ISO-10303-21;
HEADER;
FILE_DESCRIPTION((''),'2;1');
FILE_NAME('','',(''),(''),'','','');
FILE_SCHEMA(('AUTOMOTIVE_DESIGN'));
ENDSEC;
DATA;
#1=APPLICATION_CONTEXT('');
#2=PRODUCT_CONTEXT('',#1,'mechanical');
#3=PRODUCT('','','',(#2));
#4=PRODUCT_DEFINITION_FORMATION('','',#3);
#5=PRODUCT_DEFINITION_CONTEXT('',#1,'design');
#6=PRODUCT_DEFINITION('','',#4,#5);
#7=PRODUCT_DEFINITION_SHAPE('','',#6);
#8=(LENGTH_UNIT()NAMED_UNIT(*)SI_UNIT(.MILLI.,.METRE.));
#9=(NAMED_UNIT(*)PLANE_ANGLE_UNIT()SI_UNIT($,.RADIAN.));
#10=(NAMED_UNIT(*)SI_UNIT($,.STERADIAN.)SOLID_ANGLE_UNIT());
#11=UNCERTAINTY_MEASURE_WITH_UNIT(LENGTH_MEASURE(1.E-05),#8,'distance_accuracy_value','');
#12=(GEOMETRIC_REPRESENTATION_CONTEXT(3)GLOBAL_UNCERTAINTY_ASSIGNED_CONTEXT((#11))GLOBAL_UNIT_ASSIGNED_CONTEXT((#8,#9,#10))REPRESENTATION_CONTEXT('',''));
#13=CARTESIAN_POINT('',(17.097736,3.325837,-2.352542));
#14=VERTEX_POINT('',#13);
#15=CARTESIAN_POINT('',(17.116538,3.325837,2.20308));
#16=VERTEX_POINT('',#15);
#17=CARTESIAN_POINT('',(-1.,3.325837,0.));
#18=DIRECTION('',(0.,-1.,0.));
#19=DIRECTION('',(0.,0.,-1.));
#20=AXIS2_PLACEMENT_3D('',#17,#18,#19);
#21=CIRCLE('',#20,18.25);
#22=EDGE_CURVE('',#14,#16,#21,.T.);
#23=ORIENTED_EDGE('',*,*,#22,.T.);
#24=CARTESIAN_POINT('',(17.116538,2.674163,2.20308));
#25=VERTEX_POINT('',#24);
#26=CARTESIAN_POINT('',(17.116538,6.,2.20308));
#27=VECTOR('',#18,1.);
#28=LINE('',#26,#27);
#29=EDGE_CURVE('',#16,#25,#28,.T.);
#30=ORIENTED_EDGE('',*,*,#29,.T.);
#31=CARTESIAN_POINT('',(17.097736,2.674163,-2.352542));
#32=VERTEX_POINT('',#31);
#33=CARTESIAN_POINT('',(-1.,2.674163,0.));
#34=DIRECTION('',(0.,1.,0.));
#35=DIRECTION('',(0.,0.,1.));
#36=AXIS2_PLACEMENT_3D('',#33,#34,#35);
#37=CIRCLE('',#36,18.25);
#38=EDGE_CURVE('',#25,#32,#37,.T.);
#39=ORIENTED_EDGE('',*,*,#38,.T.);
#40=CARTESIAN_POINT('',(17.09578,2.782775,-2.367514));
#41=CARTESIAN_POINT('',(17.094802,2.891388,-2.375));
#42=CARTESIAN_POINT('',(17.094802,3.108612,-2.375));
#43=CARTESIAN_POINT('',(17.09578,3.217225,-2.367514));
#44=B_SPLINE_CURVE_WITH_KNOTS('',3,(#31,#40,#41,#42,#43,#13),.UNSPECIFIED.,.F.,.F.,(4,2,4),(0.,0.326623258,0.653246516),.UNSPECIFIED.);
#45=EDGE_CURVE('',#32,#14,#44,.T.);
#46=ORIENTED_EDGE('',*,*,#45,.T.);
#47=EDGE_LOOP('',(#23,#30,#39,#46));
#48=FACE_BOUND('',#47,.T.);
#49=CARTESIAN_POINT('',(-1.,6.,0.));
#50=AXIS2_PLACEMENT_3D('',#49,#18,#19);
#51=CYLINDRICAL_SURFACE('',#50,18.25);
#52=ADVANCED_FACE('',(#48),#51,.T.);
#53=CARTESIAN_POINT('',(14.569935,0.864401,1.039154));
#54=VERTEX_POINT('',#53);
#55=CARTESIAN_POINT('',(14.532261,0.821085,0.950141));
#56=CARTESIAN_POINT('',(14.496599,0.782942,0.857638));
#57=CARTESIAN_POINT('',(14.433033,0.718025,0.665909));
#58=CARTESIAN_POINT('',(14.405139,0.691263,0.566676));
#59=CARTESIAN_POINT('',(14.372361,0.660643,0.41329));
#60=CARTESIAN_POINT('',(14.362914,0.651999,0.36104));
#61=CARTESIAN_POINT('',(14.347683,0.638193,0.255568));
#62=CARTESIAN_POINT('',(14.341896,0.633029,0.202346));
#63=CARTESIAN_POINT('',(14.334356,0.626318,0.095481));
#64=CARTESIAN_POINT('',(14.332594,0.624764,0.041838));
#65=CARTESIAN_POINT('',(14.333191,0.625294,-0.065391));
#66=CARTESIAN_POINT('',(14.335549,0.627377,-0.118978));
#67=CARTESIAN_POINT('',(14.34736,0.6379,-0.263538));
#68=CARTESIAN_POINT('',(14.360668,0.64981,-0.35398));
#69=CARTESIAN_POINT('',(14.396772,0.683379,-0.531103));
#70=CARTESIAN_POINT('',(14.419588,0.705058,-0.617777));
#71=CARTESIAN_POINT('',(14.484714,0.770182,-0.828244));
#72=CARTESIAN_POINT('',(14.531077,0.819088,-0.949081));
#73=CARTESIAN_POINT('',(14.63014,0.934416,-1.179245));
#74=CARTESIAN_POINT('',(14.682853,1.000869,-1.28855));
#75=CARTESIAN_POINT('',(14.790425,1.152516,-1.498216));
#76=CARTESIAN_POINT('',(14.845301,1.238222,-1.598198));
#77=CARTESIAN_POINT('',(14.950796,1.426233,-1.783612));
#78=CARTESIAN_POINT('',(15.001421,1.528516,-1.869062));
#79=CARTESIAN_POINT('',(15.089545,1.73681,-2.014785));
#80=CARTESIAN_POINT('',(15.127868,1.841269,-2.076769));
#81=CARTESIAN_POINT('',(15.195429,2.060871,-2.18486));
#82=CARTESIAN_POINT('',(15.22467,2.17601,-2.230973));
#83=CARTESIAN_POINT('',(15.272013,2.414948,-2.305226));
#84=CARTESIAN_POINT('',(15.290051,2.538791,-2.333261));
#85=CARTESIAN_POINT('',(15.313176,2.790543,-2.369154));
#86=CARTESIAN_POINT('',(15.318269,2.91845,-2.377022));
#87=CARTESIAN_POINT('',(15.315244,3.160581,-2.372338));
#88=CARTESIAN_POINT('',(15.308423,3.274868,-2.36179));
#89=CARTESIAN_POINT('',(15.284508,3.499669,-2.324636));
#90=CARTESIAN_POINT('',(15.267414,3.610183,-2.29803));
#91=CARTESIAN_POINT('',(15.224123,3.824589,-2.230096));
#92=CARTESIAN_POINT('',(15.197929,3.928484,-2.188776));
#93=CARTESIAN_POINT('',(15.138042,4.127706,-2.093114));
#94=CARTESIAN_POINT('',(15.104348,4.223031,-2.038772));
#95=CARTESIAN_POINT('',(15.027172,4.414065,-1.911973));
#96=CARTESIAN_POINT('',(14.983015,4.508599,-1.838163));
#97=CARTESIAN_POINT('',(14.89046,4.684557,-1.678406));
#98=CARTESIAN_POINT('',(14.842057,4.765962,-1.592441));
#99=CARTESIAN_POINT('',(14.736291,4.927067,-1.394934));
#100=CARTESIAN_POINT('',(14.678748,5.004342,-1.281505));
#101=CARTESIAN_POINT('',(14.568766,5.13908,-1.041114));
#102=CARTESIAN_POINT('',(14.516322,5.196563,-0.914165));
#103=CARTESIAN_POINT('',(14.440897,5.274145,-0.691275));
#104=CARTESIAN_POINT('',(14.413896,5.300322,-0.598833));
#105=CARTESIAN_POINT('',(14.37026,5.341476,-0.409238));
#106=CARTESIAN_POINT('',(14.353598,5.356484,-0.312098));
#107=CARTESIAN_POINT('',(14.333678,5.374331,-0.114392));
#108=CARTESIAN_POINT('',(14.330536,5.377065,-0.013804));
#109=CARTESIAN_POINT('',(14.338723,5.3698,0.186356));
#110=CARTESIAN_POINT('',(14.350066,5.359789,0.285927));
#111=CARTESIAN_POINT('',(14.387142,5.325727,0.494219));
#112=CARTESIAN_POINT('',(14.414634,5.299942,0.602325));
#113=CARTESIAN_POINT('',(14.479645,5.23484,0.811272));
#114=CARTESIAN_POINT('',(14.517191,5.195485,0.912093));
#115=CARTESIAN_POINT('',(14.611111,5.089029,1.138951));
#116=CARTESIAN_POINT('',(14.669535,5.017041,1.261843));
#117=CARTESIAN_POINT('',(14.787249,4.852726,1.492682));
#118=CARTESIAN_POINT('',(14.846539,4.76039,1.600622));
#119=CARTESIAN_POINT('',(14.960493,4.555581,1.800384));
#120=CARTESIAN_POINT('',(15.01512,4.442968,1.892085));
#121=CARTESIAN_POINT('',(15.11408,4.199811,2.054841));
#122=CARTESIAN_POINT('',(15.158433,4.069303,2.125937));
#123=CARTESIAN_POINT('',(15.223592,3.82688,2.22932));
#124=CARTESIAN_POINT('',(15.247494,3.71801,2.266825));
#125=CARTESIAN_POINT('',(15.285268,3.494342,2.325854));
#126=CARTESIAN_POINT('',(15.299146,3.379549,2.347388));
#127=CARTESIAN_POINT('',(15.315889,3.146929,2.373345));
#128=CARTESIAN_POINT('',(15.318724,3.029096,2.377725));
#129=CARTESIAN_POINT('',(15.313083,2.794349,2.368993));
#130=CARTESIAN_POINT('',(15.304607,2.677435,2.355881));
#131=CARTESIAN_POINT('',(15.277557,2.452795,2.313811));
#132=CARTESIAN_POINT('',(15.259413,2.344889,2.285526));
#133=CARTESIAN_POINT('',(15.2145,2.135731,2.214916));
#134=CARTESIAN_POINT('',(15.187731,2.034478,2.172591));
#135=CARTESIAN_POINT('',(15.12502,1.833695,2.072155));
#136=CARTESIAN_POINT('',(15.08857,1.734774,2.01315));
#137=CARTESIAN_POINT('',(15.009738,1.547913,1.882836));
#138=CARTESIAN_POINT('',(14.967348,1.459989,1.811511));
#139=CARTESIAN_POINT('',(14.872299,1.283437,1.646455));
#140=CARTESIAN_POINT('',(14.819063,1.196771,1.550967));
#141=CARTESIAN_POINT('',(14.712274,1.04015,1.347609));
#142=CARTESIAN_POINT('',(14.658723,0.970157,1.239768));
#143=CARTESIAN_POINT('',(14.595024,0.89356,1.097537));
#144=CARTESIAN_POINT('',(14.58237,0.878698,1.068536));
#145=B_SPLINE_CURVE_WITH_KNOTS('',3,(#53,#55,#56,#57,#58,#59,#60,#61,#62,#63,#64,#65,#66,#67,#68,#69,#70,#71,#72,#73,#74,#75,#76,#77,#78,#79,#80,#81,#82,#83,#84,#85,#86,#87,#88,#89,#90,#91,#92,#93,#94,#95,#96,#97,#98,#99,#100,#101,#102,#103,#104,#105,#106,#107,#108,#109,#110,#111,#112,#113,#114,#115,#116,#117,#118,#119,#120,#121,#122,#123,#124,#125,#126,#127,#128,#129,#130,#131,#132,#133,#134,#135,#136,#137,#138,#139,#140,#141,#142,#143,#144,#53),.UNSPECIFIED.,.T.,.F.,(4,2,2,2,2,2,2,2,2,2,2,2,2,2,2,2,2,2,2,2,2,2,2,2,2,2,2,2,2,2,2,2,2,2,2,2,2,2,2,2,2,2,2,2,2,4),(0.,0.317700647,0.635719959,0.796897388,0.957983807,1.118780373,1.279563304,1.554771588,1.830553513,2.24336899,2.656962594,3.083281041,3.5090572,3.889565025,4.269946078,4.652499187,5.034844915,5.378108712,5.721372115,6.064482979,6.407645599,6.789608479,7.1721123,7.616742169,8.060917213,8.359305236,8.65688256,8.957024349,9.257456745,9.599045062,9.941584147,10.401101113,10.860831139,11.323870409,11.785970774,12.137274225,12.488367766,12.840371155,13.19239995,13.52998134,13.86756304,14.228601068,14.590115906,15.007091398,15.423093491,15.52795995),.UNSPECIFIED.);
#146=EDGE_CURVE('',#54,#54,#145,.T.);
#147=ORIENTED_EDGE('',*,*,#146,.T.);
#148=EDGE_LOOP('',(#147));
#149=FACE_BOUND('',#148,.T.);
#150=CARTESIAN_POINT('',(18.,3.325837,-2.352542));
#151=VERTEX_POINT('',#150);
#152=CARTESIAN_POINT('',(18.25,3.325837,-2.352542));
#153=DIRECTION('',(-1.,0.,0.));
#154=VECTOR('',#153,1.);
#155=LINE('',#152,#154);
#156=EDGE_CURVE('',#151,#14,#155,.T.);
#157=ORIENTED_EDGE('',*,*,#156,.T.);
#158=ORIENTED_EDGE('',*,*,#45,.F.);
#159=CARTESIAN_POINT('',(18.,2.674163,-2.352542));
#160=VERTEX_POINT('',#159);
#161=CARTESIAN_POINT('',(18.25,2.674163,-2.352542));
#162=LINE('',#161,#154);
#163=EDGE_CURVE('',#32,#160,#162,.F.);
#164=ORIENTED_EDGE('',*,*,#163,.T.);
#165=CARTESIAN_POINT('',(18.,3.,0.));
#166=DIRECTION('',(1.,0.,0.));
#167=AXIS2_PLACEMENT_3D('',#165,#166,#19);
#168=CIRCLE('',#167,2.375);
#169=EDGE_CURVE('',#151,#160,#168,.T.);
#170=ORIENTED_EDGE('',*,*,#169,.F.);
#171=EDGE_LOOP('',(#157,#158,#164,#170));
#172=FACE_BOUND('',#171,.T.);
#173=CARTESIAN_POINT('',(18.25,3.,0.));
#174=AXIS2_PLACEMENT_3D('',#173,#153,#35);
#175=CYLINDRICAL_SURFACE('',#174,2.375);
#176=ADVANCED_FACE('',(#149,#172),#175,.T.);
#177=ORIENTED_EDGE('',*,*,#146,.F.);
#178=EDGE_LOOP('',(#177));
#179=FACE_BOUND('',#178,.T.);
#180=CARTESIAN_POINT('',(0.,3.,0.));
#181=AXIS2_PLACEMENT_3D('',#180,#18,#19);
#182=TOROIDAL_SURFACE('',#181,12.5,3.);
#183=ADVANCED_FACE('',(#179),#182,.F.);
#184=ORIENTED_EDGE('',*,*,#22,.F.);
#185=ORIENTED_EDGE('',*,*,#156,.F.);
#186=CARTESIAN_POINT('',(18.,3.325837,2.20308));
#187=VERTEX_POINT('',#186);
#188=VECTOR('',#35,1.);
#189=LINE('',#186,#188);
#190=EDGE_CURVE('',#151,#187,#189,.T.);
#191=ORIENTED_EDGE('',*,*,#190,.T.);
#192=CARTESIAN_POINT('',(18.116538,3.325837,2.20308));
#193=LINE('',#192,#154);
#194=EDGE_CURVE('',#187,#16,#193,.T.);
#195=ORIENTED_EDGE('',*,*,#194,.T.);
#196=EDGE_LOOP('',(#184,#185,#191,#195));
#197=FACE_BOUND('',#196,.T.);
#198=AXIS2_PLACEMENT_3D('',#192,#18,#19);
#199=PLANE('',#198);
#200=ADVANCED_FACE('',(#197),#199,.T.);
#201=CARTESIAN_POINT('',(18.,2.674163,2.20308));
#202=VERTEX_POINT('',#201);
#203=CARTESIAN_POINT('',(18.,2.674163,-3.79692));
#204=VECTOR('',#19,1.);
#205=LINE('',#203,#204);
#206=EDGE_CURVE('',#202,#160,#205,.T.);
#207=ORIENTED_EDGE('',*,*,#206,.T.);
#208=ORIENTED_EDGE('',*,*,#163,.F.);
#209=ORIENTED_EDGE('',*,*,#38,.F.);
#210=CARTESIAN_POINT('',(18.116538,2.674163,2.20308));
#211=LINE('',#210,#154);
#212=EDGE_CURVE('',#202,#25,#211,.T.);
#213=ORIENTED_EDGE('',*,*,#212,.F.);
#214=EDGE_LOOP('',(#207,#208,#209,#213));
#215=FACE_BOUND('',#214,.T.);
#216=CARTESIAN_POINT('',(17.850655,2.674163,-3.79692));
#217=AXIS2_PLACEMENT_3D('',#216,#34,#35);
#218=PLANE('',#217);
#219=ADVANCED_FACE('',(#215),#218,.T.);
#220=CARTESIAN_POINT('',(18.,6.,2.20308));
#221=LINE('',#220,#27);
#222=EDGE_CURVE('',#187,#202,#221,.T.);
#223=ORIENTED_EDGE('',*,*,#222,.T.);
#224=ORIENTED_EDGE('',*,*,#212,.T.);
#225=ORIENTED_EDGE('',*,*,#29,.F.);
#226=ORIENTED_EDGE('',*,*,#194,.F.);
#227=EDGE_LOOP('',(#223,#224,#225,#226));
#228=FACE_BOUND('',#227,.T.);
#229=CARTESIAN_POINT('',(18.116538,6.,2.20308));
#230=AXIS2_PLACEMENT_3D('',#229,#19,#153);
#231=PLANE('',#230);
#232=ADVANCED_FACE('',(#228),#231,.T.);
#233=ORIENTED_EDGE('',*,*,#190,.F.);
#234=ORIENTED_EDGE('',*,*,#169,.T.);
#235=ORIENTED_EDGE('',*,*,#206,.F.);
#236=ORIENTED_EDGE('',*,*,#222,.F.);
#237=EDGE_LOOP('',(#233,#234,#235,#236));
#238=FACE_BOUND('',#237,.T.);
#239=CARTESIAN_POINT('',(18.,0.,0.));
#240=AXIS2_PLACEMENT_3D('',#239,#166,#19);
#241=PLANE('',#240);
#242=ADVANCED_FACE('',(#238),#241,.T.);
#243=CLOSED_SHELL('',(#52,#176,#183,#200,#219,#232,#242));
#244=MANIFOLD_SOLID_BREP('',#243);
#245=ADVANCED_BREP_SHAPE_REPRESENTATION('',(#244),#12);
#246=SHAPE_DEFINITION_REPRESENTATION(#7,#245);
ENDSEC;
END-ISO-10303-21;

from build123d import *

# Parameters (mm, degrees)
SKETCH1_R                 = 18.25
SKETCH1_R_2               = 13.5
BOSS_EXTRUDE1_DEPTH       = 6
CUT_EXTRUDE2_REACH        = 29.498
CUT_EXTRUDE2_START_RADIUS = 18.25
CUT_EXTRUDE2_END_RADIUS   = 18.25
SKETCH6_W                 = 6
SKETCH6_H                 = 0.651674146
SKETCH3_R                 = 3
CUT_EXTRUDE1_START        = -18.2500001
CUT_EXTRUDE1_OUTLINE_W    = 40
CUT_EXTRUDE1_OUTLINE_H    = 6
CUT_EXTRUDE1_OUTLINE_R    = 2.375
CUT_EXTRUDE1_DEPTH        = 36.5000001
CUT_EXTRUDE1_2_OUTLINE_R  = 2.375
CUT_EXTRUDE1_2_DEPTH      = 4.75
CUT_EXTRUDE4_START        = 18
SKETCH7_W                 = 5.736434108
SKETCH7_H                 = 5.158562368
CUT_EXTRUDE4_DEPTH        = 20


# Read off the part's stored shape, not the designer's step: Cut-Extrude1
with BuildPart() as part:
    # Sketch1 → Boss-Extrude1 (new body)
    with BuildSketch(Plane(origin=(0, 0, 0), x_dir=(1, 0, 0), z_dir=(0, 1, 0))):
        with Locations(Location((0, 0, 0), (0, 0, 270))):
            Circle(SKETCH1_R)
        with Locations(Location((0, 0, 0), (0, 0, 270))):
            Circle(SKETCH1_R_2, mode=Mode.SUBTRACT)
    extrude(amount=BOSS_EXTRUDE1_DEPTH)

    # Cut-Extrude2: from a cylinder face, 29.498 long prism both ways, kept between that surface and its translate by the depth
    cut_extrude2_start = Plane(origin=(0, 3, 0), z_dir=(0, -1, 0)) * Cylinder(CUT_EXTRUDE2_START_RADIUS, 96.496, mode=Mode.PRIVATE)
    cut_extrude2_end = Plane(origin=(-1, 3, 0), z_dir=(0, -1, 0)) * Cylinder(CUT_EXTRUDE2_END_RADIUS, 96.496, mode=Mode.PRIVATE)
    # Sketch6 → Cut-Extrude2 (cut, from a surface)
    with BuildSketch(Plane(origin=(0, 0, 0), x_dir=(0, 0, -1), z_dir=(1, 0, 0)), mode=Mode.PRIVATE) as cut_extrude2_sk1:
        with Locations((0.79691987, 3)):
            Rectangle(SKETCH6_W, SKETCH6_H)
    cut_extrude2_tool1 = extrude(cut_extrude2_sk1.sketch, amount=CUT_EXTRUDE2_REACH, both=True, mode=Mode.PRIVATE)
    add(((cut_extrude2_tool1 & cut_extrude2_start) - cut_extrude2_end).solids().sort_by_distance((17.483597, 3, -0.79692))[0], mode=Mode.SUBTRACT)

    # Sketch3 → Cut-Revolve1 (revolve, cut)
    with BuildSketch(Plane.XY, mode=Mode.PRIVATE) as cut_revolve1_sk:
        with Locations((-12.5, 3)):
            Circle(SKETCH3_R)
    revolve(cut_revolve1_sk.sketch.rotate(Axis((0, 0, 0), (0, 1, 0)), 270), axis=Axis((0, 0, 0), (0, 1, 0)), mode=Mode.SUBTRACT)

    # Cut-Extrude1 outline → Cut-Extrude1 (cut)
    with BuildSketch(Plane(origin=(0, 0, 0), x_dir=(0, 0, -1), z_dir=(1, 0, 0)).offset(CUT_EXTRUDE1_START)):
        with Locations((0, 3)):
            Rectangle(CUT_EXTRUDE1_OUTLINE_W, CUT_EXTRUDE1_OUTLINE_H)
        with Locations((0, 3)):
            Circle(CUT_EXTRUDE1_OUTLINE_R, mode=Mode.SUBTRACT)
    extrude(amount=CUT_EXTRUDE1_DEPTH, mode=Mode.SUBTRACT)

    # Cut-Extrude1 2 outline → Cut-Extrude1 2 (cut)
    with BuildSketch(Plane(origin=(0, 0, 0), x_dir=(0, 0, -1), z_dir=(1, 0, 0)).offset(CUT_EXTRUDE1_START)):
        with Locations((0, 3)):
            Circle(CUT_EXTRUDE1_2_OUTLINE_R)
    extrude(amount=CUT_EXTRUDE1_2_DEPTH, mode=Mode.SUBTRACT)

    # Sketch7 → Cut-Extrude4 (cut)
    with BuildSketch(Plane(origin=(0, 0, 0), x_dir=(0, 0, -1), z_dir=(1, 0, 0)).offset(CUT_EXTRUDE4_START)):
        with Locations((0, 3.03875969)):
            Rectangle(SKETCH7_W, SKETCH7_H)
    extrude(amount=CUT_EXTRUDE4_DEPTH, mode=Mode.SUBTRACT)


solid = part.part
